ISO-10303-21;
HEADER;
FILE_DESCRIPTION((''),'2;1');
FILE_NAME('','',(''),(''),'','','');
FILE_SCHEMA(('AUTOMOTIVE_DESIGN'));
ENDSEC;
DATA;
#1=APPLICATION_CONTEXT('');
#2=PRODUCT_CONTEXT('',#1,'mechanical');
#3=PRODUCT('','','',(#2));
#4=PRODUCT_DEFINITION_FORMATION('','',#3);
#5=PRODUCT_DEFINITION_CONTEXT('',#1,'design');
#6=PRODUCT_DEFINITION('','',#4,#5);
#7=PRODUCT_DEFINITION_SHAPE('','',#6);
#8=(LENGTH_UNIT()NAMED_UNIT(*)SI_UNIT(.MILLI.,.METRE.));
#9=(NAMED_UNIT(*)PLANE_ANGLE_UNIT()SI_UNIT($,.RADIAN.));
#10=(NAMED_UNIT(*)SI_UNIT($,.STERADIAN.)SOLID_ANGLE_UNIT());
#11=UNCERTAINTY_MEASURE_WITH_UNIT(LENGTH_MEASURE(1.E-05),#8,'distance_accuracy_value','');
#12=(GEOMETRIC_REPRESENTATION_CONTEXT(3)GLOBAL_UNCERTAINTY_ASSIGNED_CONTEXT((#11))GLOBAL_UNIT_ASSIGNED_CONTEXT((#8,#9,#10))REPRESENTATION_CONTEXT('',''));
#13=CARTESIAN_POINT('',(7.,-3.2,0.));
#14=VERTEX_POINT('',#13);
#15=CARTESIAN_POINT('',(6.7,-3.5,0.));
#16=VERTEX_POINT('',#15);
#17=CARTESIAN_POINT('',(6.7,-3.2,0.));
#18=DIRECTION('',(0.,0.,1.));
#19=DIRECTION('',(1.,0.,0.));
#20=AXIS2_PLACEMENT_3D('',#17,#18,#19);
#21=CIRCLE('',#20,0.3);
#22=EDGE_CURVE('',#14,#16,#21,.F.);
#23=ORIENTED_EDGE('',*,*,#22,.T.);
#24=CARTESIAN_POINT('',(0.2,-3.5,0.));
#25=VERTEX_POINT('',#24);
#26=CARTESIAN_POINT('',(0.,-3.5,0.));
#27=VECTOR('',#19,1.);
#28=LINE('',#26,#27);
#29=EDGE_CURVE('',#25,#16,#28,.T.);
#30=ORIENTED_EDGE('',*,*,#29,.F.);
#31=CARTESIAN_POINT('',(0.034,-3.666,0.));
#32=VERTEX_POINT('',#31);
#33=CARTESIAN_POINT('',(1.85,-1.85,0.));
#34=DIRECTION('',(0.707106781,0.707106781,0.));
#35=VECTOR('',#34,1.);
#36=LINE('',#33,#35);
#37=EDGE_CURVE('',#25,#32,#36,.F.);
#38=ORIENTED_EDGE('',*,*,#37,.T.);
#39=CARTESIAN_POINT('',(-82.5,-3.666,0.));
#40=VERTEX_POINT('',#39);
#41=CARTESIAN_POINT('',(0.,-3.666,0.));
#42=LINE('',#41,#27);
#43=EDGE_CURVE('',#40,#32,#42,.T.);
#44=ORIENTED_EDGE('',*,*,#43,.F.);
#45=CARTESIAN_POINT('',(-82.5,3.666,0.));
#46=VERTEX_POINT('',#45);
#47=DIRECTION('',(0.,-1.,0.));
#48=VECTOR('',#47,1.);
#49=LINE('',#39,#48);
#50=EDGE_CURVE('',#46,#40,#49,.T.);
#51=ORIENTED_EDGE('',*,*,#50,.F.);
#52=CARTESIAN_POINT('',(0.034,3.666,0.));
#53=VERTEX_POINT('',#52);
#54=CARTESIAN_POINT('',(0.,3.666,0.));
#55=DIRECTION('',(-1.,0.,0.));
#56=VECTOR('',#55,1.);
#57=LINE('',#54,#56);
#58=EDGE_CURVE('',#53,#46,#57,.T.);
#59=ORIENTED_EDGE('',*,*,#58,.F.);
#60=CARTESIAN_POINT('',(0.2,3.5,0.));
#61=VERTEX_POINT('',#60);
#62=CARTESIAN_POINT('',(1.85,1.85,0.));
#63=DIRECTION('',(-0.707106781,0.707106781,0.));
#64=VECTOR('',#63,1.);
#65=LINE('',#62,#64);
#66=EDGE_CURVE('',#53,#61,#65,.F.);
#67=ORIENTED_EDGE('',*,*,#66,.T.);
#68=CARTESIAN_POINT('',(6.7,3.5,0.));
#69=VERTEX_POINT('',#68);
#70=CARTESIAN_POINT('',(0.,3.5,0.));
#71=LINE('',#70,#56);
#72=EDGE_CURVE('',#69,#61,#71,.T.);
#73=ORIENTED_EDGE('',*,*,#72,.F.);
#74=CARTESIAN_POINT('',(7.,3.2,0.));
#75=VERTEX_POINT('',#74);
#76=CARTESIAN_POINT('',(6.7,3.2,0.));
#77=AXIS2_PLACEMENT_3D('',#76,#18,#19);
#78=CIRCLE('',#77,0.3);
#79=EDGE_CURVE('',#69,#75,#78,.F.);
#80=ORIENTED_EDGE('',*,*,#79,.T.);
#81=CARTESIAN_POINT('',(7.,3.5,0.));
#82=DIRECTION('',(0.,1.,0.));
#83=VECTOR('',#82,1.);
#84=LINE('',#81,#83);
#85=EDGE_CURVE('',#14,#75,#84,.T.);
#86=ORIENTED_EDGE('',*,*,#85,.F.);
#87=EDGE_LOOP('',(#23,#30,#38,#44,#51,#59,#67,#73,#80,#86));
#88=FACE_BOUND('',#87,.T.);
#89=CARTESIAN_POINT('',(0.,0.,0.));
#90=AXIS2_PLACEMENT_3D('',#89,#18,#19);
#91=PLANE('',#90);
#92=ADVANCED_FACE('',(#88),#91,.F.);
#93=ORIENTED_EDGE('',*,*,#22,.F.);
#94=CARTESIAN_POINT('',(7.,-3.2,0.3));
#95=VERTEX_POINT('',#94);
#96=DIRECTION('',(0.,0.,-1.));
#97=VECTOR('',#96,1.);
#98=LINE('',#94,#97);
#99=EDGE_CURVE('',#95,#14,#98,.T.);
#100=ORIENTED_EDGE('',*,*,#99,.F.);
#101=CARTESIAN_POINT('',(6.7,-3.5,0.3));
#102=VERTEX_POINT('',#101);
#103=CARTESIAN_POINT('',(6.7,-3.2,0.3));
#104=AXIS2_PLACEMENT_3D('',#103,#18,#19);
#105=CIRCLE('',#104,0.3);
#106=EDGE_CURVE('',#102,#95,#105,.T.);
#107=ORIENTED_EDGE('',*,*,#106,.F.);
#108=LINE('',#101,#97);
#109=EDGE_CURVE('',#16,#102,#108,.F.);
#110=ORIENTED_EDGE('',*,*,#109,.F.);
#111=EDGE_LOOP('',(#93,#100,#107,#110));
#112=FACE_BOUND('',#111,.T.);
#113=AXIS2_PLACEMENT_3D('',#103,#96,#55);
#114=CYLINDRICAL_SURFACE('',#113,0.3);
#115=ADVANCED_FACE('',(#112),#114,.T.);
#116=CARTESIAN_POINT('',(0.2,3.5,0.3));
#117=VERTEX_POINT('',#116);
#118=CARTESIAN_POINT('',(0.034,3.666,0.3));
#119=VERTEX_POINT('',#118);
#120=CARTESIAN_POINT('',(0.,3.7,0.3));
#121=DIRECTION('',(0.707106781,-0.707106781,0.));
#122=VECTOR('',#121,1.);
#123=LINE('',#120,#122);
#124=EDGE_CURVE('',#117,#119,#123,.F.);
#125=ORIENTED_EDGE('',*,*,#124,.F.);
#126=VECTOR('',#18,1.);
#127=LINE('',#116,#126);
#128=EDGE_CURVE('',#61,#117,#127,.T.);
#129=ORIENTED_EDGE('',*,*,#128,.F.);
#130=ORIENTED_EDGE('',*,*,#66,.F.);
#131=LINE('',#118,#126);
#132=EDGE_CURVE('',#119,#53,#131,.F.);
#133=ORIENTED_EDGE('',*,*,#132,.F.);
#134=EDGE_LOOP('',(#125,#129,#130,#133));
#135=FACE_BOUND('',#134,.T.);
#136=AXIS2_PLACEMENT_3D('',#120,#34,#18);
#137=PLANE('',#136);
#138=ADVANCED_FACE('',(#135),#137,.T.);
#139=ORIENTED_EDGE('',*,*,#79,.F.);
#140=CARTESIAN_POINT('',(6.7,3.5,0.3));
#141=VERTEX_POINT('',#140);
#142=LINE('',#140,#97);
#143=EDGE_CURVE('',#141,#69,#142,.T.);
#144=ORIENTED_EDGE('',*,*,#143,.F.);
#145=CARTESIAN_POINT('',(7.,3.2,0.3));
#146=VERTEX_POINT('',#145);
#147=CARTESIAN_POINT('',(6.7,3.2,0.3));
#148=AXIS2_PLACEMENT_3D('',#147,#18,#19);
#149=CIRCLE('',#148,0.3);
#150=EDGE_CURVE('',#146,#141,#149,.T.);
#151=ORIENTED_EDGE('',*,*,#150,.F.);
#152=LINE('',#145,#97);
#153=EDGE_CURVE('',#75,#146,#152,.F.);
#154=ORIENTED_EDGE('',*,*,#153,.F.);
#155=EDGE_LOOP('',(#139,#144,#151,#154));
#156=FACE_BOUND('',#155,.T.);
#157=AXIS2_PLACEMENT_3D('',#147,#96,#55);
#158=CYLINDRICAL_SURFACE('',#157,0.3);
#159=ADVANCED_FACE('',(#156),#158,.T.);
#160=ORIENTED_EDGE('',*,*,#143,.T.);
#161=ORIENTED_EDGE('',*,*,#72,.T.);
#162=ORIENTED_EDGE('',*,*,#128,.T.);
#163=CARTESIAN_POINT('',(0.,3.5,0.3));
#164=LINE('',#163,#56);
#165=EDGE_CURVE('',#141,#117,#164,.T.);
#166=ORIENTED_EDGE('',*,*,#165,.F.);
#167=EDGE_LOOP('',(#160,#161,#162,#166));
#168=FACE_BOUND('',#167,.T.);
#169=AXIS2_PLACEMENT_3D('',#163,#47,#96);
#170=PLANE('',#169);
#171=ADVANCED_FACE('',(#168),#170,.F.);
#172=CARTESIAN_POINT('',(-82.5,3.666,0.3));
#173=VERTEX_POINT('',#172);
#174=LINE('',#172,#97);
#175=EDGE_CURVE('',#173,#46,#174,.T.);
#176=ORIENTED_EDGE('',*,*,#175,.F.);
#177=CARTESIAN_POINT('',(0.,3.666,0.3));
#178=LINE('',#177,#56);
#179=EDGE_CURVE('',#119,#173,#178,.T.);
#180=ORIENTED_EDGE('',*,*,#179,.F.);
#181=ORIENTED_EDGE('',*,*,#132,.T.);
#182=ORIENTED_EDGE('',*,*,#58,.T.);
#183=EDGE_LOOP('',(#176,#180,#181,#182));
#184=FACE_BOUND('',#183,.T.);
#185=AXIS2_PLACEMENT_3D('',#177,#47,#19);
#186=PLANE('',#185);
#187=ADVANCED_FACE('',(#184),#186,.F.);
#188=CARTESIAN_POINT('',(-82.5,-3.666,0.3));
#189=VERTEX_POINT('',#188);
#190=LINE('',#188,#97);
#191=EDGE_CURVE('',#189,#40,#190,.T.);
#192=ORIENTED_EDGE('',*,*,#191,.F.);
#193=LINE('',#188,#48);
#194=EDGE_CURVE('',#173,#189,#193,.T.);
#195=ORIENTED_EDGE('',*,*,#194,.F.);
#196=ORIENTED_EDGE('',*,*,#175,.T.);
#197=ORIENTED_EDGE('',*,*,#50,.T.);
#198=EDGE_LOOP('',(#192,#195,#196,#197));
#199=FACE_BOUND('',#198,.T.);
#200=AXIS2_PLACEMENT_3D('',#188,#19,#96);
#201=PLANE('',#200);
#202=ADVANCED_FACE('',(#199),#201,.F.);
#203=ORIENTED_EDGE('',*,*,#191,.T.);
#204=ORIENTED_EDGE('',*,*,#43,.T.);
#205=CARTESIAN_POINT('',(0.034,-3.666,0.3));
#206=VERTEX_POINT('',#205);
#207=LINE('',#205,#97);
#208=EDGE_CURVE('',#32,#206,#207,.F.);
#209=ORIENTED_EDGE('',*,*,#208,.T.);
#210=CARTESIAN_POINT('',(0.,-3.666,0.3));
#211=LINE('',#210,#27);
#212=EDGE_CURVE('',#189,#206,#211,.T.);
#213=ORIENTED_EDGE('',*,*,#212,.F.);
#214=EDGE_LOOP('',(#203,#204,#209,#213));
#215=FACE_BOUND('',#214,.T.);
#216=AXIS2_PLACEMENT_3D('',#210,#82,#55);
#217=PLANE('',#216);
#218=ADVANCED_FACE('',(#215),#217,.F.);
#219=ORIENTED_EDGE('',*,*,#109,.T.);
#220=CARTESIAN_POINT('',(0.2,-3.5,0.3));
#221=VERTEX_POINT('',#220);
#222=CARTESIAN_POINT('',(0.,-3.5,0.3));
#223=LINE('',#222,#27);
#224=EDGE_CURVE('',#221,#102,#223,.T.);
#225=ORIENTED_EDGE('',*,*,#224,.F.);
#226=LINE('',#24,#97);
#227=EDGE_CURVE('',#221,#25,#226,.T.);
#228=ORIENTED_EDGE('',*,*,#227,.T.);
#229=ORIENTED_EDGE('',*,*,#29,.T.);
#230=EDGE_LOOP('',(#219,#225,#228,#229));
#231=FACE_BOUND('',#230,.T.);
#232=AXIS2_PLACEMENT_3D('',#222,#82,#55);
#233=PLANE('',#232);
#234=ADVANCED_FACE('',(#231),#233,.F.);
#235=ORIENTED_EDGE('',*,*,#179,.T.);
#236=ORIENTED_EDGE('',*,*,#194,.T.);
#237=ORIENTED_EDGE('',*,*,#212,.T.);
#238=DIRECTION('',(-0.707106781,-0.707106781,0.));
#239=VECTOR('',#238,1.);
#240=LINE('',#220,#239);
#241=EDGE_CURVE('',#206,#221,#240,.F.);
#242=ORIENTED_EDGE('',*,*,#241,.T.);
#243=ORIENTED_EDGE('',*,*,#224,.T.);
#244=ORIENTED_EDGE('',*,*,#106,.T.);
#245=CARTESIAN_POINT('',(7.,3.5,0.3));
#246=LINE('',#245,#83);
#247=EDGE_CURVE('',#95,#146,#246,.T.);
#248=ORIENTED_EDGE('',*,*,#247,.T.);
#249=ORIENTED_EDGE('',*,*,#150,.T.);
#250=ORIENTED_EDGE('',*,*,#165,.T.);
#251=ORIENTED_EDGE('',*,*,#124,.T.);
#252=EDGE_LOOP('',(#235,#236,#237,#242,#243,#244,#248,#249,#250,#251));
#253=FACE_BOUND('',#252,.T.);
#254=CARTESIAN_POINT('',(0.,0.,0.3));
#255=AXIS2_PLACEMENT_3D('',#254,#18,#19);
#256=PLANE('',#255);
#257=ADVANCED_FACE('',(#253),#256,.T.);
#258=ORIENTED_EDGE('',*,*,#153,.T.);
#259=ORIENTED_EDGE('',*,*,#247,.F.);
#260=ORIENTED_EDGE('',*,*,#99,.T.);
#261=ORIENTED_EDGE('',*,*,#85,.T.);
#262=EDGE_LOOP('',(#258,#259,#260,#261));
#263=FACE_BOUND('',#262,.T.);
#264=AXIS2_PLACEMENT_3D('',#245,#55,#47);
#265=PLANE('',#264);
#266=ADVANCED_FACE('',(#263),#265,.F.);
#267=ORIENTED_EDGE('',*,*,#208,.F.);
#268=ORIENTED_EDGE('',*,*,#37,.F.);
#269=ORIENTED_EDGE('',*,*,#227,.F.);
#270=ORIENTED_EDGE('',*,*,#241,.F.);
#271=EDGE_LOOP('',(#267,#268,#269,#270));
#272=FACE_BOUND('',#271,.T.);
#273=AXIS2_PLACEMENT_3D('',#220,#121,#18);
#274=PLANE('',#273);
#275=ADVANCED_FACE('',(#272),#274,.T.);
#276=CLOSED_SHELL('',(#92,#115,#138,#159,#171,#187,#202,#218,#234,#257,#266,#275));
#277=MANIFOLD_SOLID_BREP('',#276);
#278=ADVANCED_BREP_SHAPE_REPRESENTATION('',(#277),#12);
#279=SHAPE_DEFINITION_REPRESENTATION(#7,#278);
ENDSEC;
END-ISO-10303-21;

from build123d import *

# Parameters (mm, degrees)
BOSS_EXTRUDE1_DEPTH = 0.3
FILLET1_R           = 0.3
CHAMFER1_SIZE       = 0.2


with BuildPart() as part:
    # Sketch1 → Boss-Extrude1 (new body)
    with BuildSketch(Plane.XY):
        Polygon((0, 3.666), (-82.5, 3.666), (-82.5, -3.666), (0, -3.666), (0, -3.5), (7, -3.5), (7, 3.5), (0, 3.5), align=None)
    extrude(amount=BOSS_EXTRUDE1_DEPTH)

    # Fillet1
    fillet1_edges = [part.edges().sort_by_distance(p)[0] for p in [
        (7, 3.5, 0.15),
        (7, -3.5, 0.15),
    ]]
    fillet(fillet1_edges, radius=FILLET1_R)

    # Chamfer1
    # the kernel refuses this chamfer: 0.2 mm, written as the material it adds along each edge
    with BuildSketch(Plane(origin=(0, 3.5, 0), x_dir=(0.9996219169112966, -0.027495876610587326, 0), z_dir=(0, 0, 1))) as chamfer1_piece_1_section:
        Polygon((CHAMFER1_SIZE * 0.999621916911, CHAMFER1_SIZE * 0.0274958766106), (-CHAMFER1_SIZE * 0.0274958766106, CHAMFER1_SIZE * 0.999621916911), (0, 0), align=None)
    chamfer1_piece_1 = extrude(amount=0.3, mode=Mode.PRIVATE)
    chamfer1_piece_1 = split(chamfer1_piece_1, bisect_by=Plane(origin=(0.068475568, 3.666, 0.15), z_dir=(0, -1, 0)), keep=Keep.TOP, mode=Mode.PRIVATE)
    add(chamfer1_piece_1)
    with BuildSketch(Plane(origin=(0, -3.5, 0), x_dir=(0.9996219169112966, 0.02749587661058735, 0), z_dir=(0, 0, 1))) as chamfer1_piece_2_section:
        Polygon((CHAMFER1_SIZE * 0.999621916911, -CHAMFER1_SIZE * 0.0274958766106), (-CHAMFER1_SIZE * 0.0274958766106, -CHAMFER1_SIZE * 0.999621916911), (0, 0), align=None)
    chamfer1_piece_2 = extrude(amount=0.3, mode=Mode.PRIVATE)
    chamfer1_piece_2 = split(chamfer1_piece_2, bisect_by=Plane(origin=(0.068475568, -3.666, 0.15), z_dir=(0, 1, 0)), keep=Keep.TOP, mode=Mode.PRIVATE)
    add(chamfer1_piece_2)


solid = part.part
